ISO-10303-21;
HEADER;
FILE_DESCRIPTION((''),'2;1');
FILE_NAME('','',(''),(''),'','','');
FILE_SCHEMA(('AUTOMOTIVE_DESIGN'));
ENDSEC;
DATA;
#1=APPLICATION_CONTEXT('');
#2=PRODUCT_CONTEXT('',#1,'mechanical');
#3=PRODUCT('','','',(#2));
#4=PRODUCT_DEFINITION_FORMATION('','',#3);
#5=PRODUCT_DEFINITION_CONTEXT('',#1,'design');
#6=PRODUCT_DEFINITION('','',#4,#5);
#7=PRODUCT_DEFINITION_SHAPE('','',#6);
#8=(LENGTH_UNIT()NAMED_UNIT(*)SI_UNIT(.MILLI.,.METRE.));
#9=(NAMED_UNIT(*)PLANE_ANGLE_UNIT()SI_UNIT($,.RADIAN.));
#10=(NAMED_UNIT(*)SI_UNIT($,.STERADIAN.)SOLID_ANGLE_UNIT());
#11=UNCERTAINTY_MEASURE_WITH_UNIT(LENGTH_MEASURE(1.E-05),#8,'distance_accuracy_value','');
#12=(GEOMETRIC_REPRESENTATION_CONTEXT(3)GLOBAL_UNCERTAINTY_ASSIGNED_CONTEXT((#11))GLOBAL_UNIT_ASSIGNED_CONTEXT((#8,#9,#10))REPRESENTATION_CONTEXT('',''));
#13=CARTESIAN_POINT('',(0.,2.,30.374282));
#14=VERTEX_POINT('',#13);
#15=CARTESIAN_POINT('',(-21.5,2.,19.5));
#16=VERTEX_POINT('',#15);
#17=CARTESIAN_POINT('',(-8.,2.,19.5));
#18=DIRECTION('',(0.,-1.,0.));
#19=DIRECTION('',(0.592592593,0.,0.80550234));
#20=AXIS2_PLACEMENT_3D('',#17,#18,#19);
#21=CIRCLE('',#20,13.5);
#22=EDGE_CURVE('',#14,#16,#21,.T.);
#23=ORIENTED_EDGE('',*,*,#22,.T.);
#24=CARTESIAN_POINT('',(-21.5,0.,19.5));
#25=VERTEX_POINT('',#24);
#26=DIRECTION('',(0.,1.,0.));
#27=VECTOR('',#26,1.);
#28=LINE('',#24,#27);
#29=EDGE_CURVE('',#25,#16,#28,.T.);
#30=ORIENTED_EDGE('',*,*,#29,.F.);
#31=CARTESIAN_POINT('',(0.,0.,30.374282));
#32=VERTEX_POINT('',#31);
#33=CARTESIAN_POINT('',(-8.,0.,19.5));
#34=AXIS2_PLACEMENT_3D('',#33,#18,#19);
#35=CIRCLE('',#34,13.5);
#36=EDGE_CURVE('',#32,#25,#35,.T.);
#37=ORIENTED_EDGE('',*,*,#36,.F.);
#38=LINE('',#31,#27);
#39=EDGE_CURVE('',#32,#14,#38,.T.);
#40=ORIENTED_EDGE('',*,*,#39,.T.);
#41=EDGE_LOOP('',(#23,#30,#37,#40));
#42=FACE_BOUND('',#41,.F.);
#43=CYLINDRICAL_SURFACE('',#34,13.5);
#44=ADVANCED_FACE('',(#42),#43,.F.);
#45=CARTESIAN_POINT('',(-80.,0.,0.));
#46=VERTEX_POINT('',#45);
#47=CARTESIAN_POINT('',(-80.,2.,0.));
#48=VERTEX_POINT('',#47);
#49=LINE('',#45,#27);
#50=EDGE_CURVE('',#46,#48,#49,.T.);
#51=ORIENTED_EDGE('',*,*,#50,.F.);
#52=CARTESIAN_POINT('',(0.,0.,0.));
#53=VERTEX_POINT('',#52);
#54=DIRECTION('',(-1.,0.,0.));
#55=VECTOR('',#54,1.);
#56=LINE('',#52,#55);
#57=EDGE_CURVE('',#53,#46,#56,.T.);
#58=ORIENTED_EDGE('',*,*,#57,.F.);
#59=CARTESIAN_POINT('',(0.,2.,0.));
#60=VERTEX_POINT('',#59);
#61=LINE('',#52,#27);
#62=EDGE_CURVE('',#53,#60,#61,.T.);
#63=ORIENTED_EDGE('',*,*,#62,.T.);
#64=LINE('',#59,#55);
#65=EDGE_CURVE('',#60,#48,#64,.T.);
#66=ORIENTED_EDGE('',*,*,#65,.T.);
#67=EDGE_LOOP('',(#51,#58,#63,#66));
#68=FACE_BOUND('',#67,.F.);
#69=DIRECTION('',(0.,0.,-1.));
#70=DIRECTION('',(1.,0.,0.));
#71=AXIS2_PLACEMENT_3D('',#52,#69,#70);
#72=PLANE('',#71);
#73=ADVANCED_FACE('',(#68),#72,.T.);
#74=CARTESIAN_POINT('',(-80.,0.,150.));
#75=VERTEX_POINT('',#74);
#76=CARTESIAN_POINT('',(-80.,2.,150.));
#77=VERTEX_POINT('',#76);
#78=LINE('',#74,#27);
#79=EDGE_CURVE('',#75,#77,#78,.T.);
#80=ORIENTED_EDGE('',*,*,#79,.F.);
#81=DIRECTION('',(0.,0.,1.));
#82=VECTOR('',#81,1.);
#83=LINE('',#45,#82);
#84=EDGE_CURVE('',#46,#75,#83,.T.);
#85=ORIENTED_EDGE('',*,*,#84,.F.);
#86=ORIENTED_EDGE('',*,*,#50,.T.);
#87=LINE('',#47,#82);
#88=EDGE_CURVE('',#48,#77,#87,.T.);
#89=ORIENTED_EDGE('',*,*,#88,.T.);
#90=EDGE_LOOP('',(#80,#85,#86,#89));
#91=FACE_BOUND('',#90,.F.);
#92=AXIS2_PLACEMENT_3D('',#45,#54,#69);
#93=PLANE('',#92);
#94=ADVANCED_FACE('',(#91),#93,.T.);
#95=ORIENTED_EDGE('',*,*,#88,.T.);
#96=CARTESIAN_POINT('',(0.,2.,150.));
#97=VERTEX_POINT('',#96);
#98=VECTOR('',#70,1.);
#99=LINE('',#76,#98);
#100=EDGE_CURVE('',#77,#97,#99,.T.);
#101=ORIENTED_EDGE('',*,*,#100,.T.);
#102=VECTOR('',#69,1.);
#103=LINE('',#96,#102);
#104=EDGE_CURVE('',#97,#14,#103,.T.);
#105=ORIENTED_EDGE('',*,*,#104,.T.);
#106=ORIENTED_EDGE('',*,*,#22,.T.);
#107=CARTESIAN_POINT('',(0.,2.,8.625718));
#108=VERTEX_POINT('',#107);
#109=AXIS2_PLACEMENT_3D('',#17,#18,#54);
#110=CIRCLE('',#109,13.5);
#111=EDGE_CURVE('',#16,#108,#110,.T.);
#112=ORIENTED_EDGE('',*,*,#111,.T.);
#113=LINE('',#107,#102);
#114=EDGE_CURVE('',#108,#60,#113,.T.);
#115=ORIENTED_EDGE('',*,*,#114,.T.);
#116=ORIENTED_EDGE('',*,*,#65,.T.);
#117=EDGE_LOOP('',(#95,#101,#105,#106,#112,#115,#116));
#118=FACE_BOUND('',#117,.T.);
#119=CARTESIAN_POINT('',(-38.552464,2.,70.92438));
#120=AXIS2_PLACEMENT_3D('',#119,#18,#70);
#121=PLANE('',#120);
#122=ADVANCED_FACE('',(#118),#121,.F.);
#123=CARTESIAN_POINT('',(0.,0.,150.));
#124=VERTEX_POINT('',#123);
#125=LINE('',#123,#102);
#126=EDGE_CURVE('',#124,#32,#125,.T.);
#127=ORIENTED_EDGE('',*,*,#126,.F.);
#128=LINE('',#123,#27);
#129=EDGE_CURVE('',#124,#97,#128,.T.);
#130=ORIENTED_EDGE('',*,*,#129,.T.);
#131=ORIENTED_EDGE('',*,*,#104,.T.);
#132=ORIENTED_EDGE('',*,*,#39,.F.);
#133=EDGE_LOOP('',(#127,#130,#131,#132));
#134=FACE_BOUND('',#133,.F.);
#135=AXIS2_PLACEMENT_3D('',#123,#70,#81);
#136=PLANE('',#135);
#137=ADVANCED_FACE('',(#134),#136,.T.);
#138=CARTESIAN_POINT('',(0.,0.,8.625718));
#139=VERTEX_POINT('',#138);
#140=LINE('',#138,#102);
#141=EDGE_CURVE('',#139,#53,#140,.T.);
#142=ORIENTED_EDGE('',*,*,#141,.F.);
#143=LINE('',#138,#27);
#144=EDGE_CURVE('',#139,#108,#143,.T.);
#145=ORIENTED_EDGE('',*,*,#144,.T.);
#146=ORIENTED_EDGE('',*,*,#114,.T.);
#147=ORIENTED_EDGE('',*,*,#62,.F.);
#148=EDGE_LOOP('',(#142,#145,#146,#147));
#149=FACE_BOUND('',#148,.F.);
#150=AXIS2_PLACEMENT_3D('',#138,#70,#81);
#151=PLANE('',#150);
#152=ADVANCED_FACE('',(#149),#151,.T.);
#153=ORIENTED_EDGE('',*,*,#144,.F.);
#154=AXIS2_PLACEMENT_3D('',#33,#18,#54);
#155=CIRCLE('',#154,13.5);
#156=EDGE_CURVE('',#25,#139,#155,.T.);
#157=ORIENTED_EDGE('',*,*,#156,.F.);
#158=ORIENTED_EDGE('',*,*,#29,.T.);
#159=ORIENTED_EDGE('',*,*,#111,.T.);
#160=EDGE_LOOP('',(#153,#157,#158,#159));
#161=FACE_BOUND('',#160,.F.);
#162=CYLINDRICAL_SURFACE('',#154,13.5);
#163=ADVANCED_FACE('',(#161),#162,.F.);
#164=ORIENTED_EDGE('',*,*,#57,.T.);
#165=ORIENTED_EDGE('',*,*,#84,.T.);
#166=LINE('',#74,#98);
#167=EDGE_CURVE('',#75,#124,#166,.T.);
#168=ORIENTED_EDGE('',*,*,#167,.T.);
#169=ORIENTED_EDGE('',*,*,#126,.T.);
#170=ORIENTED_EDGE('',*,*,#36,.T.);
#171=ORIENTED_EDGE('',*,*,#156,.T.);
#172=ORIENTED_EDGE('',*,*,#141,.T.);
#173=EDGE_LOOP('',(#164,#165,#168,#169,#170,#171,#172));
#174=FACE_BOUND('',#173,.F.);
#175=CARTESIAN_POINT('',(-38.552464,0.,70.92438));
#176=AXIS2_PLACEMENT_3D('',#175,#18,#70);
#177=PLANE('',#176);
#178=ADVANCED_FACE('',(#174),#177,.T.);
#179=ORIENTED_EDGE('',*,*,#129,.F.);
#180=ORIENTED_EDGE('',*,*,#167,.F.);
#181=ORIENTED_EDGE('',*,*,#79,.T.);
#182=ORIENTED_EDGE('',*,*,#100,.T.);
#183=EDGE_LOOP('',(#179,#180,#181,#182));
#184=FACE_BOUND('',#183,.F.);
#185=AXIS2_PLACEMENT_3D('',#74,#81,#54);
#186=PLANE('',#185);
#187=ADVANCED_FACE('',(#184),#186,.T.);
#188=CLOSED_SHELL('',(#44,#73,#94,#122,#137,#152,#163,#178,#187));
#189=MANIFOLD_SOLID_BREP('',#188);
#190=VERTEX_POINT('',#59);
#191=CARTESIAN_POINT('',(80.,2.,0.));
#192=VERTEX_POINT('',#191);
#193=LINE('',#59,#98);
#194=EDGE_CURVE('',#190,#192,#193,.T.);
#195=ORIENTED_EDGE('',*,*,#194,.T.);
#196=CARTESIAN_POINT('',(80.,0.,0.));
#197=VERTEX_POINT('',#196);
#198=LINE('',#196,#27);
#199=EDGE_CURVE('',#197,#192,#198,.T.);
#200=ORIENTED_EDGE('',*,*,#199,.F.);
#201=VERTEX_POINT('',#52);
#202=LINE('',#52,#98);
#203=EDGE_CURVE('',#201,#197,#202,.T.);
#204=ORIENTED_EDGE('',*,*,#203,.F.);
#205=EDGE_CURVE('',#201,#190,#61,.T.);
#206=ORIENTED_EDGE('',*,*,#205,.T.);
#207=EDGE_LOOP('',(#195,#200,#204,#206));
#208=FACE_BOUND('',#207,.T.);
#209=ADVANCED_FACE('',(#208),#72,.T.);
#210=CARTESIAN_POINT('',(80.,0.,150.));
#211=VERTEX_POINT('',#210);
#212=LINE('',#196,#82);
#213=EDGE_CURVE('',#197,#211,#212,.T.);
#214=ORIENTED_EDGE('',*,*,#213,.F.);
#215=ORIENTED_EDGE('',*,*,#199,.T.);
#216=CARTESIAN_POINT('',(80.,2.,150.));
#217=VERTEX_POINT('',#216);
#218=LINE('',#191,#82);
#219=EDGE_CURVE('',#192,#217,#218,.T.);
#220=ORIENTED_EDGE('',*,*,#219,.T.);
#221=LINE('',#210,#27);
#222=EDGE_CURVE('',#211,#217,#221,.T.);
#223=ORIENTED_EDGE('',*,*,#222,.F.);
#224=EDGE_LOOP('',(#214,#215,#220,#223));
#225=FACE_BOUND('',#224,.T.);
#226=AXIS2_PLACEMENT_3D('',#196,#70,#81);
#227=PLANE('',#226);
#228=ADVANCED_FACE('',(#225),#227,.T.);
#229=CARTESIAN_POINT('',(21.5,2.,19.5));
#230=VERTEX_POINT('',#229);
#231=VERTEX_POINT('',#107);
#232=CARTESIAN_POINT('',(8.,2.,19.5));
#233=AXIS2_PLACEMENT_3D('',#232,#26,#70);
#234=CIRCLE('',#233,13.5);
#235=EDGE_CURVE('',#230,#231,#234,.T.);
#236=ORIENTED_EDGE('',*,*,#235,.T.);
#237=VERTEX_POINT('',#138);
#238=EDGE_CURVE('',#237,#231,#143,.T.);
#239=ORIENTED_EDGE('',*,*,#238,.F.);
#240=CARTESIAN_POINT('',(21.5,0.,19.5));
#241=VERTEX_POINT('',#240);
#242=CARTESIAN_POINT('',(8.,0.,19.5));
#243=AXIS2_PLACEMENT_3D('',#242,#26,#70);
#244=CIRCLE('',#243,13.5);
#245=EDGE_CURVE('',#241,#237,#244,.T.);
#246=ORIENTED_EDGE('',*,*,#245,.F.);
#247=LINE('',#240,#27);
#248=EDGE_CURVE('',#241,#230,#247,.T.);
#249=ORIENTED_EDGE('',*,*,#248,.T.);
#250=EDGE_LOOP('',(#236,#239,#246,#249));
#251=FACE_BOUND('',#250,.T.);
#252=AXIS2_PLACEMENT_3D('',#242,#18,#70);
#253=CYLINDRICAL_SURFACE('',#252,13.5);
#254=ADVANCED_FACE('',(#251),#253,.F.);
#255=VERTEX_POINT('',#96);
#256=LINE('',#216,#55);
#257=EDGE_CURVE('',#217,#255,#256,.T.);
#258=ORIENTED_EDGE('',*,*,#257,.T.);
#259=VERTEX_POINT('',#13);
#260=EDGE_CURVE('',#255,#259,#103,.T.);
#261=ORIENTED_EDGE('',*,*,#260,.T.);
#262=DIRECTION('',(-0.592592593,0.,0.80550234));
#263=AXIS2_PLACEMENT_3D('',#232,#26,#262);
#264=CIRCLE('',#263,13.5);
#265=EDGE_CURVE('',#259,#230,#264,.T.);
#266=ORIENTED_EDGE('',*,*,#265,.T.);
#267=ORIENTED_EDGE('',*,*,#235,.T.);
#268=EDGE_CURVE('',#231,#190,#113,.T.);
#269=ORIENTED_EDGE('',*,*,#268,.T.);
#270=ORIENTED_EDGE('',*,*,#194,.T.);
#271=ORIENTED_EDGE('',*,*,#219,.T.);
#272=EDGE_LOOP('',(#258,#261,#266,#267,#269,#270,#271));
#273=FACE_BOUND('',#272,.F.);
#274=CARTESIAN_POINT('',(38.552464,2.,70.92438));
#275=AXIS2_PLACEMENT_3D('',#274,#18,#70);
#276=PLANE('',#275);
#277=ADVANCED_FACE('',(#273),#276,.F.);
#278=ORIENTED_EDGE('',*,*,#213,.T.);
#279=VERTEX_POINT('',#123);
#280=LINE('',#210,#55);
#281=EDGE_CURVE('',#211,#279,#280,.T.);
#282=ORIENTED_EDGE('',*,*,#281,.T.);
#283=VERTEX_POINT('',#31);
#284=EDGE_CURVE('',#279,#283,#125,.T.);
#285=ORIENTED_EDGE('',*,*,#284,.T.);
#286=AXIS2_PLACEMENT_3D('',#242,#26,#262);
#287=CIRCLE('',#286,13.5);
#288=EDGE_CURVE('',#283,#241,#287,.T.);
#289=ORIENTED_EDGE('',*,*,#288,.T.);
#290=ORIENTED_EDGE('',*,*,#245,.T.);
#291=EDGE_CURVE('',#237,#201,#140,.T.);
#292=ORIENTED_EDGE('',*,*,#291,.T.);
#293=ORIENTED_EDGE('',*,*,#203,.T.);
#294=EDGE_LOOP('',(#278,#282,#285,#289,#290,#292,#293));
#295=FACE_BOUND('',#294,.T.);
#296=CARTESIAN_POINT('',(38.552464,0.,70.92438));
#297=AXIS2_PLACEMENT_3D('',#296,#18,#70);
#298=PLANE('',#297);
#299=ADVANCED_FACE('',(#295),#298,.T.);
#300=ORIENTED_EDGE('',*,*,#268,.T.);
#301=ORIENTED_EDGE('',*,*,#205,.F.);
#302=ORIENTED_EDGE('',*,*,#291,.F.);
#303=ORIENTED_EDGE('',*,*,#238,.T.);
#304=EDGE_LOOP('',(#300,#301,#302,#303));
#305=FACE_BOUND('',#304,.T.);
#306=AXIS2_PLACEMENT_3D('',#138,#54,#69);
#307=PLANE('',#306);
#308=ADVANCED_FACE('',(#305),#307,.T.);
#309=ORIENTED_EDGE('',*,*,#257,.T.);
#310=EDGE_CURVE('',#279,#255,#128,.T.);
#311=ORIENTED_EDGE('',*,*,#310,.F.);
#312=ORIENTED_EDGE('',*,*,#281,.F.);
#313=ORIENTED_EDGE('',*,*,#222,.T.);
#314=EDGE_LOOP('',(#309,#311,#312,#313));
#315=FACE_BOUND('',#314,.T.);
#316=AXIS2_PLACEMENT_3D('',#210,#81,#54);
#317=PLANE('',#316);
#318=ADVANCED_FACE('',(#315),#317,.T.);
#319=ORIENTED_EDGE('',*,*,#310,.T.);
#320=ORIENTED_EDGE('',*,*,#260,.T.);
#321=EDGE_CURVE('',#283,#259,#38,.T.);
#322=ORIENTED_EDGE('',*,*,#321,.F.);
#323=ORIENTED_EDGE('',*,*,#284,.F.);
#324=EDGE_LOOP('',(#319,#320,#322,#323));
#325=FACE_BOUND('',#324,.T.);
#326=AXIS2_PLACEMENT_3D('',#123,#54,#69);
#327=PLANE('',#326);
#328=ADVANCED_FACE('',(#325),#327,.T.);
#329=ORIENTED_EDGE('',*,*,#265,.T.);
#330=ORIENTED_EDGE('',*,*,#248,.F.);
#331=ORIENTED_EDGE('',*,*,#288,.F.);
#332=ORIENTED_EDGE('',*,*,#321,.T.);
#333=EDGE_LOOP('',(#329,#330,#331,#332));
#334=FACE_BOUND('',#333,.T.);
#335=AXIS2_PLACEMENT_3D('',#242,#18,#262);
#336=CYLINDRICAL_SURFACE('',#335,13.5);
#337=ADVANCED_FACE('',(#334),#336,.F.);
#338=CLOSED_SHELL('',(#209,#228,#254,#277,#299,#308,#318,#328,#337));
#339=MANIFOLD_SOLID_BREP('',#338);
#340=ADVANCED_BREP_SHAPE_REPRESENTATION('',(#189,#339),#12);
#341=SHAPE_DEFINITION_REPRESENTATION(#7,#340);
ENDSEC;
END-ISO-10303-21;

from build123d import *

# Parameters (mm, degrees)
F1_DEPTH = 2


# Not quite as in the source:
# - a feature names something its author has since deleted; it is built from what else it names


with BuildPart() as f1:
    # F0 (on Front) → F1 (new body)
    with BuildSketch(Plane.XZ):
        with BuildLine():
            Line((0, 0), (80, 0))
            Line((80, 0), (80, 150))
            Line((80, 150), (0, 150))
            Line((0, 150), (0, 30.3742815855))
            ThreePointArc((0, 30.3742815855), (14.0930288035, 31.5467838032), (21.5, 19.5))
            ThreePointArc((21.5, 19.5), (14.0930288035, 7.4532161968), (0, 8.6257184145))
            Line((0, 8.6257184145), (0, 0))
        make_face()
    extrude(amount=-F1_DEPTH)


with BuildPart() as f2_1:
    # F2: instance of F1
    add(f1.part.mirror(Plane.YZ))


solid = Compound([f1.part, f2_1.part])
